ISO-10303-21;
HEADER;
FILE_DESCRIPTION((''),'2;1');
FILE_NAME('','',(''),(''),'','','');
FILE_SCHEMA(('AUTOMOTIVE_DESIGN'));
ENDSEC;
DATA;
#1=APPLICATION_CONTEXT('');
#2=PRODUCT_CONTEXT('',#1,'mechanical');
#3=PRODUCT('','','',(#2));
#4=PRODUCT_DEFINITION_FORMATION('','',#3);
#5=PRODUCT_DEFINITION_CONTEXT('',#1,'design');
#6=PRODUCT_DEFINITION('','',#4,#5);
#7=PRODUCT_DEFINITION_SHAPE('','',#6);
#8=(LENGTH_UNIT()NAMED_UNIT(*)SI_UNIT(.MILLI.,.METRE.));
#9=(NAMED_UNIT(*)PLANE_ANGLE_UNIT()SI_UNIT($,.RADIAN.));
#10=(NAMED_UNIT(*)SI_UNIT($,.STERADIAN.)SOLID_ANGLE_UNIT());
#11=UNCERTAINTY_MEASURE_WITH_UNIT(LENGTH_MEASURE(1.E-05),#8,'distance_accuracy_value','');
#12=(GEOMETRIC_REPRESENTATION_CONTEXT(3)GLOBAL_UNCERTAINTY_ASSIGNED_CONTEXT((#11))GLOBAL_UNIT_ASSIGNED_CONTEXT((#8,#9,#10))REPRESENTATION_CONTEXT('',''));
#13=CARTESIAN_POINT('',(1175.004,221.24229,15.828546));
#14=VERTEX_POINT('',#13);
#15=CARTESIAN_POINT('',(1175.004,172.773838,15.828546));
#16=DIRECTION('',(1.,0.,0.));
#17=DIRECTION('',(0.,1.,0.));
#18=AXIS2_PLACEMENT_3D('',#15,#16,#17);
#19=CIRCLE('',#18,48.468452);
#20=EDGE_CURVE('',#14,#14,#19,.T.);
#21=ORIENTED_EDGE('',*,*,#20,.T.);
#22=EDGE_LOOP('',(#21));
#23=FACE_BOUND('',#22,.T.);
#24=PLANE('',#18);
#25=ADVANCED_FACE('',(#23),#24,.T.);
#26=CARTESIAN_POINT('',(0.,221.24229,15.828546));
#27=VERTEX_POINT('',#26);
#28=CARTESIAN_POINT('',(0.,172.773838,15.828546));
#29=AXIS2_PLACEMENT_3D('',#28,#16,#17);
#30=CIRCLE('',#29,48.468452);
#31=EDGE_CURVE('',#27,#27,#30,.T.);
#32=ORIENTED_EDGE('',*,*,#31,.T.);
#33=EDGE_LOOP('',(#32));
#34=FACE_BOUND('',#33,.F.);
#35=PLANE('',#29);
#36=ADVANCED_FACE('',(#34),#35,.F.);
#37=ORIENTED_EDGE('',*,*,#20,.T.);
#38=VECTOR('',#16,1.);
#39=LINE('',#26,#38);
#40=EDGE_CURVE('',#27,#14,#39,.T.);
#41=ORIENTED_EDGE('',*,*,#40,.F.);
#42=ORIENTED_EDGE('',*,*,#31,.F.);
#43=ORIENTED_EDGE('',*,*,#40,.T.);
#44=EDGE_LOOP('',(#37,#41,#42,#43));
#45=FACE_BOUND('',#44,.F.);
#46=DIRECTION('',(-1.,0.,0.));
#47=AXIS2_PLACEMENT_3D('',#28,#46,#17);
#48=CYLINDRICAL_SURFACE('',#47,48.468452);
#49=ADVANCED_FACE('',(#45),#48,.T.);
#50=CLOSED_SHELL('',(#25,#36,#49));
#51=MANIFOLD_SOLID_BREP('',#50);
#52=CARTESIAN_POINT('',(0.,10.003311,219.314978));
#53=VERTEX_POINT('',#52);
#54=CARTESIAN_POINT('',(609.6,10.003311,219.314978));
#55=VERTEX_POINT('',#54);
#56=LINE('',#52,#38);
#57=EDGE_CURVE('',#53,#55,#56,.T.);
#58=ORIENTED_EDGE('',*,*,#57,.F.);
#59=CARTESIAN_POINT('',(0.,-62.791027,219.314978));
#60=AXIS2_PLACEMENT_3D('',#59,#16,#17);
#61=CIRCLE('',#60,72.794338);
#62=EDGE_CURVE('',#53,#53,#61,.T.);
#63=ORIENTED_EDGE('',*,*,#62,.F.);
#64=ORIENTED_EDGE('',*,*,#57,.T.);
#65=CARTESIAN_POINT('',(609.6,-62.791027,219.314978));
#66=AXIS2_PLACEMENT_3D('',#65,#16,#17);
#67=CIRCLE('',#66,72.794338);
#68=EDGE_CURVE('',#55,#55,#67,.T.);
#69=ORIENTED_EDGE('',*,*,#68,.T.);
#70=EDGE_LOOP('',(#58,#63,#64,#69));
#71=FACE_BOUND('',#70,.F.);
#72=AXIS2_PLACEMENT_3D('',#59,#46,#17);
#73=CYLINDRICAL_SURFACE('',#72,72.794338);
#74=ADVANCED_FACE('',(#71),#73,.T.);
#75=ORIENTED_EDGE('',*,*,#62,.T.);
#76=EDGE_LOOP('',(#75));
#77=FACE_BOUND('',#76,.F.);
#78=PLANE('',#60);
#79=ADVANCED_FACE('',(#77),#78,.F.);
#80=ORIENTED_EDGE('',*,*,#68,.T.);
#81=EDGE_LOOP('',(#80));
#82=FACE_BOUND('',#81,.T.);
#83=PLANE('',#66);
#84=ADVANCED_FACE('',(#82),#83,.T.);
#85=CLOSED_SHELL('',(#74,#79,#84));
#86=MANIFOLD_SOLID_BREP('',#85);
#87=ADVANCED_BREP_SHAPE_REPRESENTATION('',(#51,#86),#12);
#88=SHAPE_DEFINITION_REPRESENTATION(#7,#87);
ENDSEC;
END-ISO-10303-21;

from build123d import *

# Parameters (mm, degrees)
F0_R     = 48.4684521976
F3_DEPTH = 1175.004
F2_R     = 72.7943383902
F4_DEPTH = 609.6


# Not quite as in the source:
# - the program builds the solid bodies; features that only make, move or delete a surface that nothing else refers to are left out


with BuildPart() as f3:
    # F0 (on Right) → F3 (new body)
    with BuildSketch(Plane.YZ):
        with Locations((172.7738380432, 15.8285461366)):
            Circle(F0_R)
    extrude(amount=F3_DEPTH)


with BuildPart() as f4:
    # F2 (on Right) → F4 (new body)
    with BuildSketch(Plane.YZ):
        with Locations((-62.7910271287, 219.3149775267)):
            Circle(F2_R)
    extrude(amount=F4_DEPTH)


solid = Compound([f3.part, f4.part])
